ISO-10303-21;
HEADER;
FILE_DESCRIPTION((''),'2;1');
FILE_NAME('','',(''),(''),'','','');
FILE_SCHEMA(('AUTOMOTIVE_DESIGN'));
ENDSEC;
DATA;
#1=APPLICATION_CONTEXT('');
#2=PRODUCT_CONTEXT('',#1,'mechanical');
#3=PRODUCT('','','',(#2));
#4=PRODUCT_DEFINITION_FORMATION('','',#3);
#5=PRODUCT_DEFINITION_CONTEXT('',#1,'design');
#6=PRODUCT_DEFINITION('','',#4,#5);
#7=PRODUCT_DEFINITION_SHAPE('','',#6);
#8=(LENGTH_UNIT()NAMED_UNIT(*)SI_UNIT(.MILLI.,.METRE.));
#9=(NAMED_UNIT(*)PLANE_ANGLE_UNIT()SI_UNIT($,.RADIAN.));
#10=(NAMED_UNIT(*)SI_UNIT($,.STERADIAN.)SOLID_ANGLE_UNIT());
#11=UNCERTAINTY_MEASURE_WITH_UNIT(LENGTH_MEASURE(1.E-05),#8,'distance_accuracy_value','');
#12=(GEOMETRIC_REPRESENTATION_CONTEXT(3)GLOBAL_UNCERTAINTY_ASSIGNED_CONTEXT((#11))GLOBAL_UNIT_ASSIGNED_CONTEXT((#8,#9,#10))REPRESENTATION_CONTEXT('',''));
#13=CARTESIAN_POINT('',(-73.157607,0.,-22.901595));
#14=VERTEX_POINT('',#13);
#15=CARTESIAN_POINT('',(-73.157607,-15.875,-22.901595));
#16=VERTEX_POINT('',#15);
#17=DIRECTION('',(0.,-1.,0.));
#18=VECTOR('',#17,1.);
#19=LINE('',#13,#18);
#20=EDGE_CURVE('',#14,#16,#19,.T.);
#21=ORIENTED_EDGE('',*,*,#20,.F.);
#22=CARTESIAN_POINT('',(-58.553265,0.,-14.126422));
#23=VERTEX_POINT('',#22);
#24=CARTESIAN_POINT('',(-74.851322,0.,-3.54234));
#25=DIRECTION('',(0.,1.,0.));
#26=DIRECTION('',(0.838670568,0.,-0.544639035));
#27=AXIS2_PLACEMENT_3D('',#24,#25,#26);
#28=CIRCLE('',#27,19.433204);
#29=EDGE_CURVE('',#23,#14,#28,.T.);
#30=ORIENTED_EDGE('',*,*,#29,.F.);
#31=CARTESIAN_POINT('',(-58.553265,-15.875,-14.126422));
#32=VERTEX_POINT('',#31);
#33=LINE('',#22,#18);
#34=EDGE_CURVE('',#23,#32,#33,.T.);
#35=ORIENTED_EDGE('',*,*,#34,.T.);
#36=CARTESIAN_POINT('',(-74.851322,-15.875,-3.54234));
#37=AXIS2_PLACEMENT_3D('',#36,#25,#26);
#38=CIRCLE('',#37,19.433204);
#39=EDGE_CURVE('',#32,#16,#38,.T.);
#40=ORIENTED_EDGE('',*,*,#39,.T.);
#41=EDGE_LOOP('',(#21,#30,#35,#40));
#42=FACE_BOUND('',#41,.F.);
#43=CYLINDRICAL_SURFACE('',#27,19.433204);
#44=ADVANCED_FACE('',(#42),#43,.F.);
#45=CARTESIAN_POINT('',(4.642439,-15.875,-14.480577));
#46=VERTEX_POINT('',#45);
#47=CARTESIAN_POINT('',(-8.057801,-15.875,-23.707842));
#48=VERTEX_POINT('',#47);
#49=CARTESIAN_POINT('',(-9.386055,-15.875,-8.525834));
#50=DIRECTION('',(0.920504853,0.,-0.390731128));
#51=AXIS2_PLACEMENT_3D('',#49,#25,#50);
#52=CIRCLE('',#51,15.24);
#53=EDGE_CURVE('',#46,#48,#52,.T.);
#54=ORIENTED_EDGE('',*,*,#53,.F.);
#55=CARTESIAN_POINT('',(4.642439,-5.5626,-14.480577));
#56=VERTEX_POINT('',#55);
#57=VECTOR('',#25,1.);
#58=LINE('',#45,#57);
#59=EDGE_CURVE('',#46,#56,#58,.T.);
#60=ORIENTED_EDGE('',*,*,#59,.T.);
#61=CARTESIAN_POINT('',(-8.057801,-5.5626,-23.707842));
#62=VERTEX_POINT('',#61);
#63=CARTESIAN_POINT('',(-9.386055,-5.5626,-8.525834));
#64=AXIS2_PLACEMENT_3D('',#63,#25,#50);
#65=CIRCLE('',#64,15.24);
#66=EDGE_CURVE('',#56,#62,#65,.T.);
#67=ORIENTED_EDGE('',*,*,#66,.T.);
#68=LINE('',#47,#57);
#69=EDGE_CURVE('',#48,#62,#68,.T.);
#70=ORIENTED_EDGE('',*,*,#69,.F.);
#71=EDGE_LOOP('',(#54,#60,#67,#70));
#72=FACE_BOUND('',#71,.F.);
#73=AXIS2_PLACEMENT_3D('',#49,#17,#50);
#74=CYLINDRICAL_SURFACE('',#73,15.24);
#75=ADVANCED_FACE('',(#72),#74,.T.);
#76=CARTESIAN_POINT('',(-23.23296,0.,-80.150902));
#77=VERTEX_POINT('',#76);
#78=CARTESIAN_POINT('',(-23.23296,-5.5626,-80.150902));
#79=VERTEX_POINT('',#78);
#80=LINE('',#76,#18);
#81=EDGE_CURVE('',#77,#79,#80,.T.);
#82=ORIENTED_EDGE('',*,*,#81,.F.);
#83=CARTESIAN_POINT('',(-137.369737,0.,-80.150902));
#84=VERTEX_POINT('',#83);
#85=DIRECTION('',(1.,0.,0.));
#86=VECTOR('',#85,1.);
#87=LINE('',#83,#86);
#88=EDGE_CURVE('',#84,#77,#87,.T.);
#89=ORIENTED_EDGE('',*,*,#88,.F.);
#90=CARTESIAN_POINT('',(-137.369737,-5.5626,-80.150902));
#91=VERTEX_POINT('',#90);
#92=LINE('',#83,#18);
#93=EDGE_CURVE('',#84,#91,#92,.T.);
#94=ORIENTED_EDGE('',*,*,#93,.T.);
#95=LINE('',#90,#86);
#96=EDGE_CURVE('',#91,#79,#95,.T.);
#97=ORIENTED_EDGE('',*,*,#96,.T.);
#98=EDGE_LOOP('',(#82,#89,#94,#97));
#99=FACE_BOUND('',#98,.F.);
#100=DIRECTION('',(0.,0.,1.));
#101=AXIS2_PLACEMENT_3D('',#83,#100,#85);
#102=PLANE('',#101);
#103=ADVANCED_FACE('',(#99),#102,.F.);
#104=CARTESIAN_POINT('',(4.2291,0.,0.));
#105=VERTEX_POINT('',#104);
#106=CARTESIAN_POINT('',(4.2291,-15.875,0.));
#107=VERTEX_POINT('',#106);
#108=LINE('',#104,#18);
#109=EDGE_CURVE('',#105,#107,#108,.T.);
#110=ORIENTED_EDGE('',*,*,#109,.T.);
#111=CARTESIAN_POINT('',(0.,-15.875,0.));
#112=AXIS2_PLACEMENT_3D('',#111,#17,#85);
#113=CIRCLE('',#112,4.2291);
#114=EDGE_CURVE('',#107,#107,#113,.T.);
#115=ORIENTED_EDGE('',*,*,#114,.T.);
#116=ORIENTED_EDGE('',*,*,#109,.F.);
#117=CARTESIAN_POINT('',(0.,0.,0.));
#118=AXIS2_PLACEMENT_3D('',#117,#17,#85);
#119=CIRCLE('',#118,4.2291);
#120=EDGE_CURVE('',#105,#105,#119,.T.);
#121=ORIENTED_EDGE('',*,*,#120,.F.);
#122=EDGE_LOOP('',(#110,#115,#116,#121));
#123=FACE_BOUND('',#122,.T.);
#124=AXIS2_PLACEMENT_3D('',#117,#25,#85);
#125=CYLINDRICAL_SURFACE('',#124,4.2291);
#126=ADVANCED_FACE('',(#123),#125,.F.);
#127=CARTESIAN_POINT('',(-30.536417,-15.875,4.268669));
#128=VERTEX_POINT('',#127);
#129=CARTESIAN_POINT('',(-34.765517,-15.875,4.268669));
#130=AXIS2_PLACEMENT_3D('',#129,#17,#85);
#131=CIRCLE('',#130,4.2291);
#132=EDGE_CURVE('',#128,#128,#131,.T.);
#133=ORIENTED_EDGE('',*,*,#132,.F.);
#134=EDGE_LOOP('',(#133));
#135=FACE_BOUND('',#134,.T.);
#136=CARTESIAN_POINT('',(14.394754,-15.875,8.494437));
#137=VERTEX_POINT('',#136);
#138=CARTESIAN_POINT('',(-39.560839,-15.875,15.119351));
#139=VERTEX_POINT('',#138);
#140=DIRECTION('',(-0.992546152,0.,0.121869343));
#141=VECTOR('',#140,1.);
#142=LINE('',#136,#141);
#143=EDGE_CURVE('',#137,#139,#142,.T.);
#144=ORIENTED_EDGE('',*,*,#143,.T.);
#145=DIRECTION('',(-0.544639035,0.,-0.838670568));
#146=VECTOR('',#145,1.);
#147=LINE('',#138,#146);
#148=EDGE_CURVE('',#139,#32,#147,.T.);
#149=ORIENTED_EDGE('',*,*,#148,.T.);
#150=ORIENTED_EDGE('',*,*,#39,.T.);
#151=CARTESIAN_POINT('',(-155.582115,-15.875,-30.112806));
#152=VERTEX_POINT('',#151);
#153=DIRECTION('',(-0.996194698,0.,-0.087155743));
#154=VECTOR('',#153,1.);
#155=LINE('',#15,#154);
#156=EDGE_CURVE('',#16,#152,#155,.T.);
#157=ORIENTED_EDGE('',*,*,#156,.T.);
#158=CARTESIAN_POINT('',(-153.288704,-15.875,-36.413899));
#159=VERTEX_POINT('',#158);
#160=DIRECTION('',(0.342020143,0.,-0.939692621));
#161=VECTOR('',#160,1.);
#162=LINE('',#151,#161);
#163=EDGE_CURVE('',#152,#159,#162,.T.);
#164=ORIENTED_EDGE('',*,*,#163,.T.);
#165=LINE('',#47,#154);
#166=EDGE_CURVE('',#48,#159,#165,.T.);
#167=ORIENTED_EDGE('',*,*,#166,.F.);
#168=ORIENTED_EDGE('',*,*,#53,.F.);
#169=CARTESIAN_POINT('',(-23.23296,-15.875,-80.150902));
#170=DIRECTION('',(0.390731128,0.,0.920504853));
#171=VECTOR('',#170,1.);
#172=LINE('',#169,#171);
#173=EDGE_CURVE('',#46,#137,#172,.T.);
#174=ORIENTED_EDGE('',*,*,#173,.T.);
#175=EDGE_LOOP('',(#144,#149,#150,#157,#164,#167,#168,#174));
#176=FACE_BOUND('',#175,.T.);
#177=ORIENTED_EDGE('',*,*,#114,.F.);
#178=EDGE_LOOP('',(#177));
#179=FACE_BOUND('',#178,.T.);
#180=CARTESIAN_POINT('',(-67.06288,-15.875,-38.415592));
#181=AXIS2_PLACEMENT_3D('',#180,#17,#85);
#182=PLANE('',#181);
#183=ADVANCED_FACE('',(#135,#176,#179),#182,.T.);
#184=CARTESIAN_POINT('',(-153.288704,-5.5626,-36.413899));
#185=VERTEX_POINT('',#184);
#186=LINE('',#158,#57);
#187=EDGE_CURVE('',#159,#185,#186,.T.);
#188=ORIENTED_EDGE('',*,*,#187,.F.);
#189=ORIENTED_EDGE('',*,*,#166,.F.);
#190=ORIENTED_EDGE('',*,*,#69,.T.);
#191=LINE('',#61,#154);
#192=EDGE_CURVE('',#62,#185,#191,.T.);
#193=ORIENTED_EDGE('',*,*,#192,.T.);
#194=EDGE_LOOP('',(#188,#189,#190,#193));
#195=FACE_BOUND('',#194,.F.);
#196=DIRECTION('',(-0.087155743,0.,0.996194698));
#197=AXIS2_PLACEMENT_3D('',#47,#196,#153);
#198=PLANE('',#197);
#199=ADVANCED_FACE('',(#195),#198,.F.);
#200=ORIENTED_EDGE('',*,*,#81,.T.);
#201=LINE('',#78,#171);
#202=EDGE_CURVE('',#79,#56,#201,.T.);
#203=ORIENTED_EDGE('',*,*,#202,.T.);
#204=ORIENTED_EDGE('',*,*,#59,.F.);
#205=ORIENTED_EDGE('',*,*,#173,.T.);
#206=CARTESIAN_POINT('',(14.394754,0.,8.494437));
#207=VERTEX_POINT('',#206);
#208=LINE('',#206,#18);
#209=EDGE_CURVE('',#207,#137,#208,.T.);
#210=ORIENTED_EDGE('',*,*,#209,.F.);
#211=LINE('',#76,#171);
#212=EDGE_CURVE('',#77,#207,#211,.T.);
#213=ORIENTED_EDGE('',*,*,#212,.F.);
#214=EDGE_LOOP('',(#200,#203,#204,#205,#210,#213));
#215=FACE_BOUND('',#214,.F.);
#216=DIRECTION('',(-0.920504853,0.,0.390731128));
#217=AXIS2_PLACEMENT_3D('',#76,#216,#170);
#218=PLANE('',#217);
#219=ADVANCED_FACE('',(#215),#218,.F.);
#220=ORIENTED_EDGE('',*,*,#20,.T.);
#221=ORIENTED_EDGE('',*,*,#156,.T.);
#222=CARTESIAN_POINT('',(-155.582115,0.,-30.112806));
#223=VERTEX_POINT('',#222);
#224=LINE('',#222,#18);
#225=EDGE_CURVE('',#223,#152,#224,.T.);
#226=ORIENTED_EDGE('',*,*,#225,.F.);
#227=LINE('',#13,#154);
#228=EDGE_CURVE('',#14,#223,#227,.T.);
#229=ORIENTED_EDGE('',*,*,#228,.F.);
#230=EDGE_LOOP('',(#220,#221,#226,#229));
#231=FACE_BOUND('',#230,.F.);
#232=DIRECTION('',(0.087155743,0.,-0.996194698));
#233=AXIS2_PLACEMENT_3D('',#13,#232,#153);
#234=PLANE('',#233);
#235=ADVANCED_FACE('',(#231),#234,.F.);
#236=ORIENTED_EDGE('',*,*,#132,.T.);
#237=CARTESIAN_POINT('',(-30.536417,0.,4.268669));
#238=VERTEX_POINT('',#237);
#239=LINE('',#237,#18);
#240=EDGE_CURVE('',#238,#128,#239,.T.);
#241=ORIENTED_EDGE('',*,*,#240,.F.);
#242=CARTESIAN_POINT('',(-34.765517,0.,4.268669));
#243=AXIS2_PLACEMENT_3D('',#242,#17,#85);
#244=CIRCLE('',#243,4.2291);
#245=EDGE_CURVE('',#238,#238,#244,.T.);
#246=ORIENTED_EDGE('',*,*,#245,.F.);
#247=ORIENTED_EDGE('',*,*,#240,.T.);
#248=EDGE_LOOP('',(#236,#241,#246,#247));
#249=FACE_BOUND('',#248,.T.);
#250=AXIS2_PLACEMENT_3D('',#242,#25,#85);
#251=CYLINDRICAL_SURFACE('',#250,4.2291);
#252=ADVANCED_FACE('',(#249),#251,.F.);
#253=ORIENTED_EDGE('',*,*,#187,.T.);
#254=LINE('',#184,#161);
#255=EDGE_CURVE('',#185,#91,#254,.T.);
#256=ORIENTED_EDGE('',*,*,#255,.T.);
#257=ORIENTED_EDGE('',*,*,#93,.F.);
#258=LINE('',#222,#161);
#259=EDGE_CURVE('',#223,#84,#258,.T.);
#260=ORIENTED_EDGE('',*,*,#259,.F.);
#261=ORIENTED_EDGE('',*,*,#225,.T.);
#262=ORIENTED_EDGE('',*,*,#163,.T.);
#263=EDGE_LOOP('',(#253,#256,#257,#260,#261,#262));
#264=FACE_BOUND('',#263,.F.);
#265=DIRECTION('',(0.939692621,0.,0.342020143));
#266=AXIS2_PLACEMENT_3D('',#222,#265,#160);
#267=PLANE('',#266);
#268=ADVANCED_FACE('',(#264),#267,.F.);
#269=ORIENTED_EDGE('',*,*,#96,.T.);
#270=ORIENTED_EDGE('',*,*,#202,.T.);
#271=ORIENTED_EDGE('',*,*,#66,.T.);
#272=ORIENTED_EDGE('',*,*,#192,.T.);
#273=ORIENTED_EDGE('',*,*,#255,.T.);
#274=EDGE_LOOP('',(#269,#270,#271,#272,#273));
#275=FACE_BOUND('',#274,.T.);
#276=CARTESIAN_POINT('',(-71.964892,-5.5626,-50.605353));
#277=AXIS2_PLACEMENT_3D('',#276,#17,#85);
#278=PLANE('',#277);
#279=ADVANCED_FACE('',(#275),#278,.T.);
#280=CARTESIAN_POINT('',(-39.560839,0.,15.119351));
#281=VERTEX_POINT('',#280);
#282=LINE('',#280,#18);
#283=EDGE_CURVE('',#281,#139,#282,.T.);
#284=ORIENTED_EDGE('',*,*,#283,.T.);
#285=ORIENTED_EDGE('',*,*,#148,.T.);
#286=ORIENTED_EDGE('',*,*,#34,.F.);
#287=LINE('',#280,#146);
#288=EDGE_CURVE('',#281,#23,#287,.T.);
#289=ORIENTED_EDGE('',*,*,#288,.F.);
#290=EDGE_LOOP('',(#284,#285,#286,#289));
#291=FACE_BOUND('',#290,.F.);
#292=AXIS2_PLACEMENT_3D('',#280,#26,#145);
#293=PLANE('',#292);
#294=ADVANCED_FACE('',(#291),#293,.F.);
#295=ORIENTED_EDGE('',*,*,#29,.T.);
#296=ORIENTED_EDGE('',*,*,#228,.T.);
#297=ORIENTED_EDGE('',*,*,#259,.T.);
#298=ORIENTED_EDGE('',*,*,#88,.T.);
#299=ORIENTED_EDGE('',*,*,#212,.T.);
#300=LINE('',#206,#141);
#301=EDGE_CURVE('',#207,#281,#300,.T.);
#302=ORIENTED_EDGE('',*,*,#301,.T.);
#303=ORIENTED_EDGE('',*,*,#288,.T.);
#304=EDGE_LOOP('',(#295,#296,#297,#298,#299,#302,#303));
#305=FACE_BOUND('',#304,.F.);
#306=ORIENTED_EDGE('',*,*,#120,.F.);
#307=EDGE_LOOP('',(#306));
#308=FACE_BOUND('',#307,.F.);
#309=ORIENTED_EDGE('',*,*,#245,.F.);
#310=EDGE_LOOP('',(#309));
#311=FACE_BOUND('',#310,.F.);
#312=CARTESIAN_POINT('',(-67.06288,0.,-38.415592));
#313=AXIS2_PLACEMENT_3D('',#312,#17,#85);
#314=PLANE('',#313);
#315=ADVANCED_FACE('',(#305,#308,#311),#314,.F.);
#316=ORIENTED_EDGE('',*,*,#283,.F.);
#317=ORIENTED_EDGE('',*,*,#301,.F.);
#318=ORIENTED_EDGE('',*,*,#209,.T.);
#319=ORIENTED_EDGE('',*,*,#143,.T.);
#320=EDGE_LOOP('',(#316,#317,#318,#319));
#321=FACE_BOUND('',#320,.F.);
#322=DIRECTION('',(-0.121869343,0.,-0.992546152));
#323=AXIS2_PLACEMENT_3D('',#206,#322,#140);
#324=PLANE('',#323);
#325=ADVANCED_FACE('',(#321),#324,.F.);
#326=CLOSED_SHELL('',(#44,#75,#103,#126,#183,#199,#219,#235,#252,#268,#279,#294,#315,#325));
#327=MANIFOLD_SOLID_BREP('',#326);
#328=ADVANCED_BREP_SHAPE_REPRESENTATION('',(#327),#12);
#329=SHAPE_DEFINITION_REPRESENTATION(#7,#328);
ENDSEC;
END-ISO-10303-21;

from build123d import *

# Parameters (mm, degrees)
F0_R     = 4.2291
F1_DEPTH = 15.875
F3_DEPTH = 10.3124


# Not quite as in the source:
# - a feature of the source that left no trace in its solid (it failed there, or was rolled back) is left out


with BuildPart() as f1:
    # F0 (on Front) → F1 (new body)
    with BuildSketch(Plane.XZ):
        with BuildLine():
            Line((14.3947540456, 8.4944370214), (-39.560838545, 15.1193507659))
            Line((-39.560838545, 15.1193507659), (-58.5532654186, -14.1264219546))
            ThreePointArc((-58.5532654186, -14.1264219546), (-64.8424818087, -20.1998476249), (-73.1576066321, -22.9015954566))
            Line((-73.1576066321, -22.9015954566), (-155.5821148258, -30.1128055203))
            Line((-155.5821148258, -30.1128055203), (-137.3697370291, -80.1509022713))
            Line((-137.3697370291, -80.1509022713), (-23.2329600585, -80.1509022713))
            Line((-23.2329600585, -80.1509022713), (14.3947540456, 8.4944370214))
        make_face()
        with Locations((-34.7655170351, 4.2686687437)):
            Circle(F0_R, mode=Mode.SUBTRACT)
        Circle(F0_R, mode=Mode.SUBTRACT)
    extrude(amount=F1_DEPTH)

    # F2 (on face) → F3 (cut)
    with BuildSketch(Plane.XZ.offset(15.875)):
        with BuildLine():
            Line((-8.0578011567, -23.7078415676), (-153.2887042884, -36.4138991852))
            Line((-153.2887042884, -36.4138991852), (-137.3697370291, -80.1509022713))
            Line((-137.3697370291, -80.1509022713), (-23.2329600585, -80.1509022713))
            Line((-23.2329600585, -80.1509022713), (4.6424392905, -14.4805767668))
            ThreePointArc((4.6424392905, -14.4805767668), (-0.4282074312, -20.8552533629), (-8.0578011567, -23.7078415676))
        make_face()
    extrude(amount=-F3_DEPTH, mode=Mode.SUBTRACT)


solid = f1.part
